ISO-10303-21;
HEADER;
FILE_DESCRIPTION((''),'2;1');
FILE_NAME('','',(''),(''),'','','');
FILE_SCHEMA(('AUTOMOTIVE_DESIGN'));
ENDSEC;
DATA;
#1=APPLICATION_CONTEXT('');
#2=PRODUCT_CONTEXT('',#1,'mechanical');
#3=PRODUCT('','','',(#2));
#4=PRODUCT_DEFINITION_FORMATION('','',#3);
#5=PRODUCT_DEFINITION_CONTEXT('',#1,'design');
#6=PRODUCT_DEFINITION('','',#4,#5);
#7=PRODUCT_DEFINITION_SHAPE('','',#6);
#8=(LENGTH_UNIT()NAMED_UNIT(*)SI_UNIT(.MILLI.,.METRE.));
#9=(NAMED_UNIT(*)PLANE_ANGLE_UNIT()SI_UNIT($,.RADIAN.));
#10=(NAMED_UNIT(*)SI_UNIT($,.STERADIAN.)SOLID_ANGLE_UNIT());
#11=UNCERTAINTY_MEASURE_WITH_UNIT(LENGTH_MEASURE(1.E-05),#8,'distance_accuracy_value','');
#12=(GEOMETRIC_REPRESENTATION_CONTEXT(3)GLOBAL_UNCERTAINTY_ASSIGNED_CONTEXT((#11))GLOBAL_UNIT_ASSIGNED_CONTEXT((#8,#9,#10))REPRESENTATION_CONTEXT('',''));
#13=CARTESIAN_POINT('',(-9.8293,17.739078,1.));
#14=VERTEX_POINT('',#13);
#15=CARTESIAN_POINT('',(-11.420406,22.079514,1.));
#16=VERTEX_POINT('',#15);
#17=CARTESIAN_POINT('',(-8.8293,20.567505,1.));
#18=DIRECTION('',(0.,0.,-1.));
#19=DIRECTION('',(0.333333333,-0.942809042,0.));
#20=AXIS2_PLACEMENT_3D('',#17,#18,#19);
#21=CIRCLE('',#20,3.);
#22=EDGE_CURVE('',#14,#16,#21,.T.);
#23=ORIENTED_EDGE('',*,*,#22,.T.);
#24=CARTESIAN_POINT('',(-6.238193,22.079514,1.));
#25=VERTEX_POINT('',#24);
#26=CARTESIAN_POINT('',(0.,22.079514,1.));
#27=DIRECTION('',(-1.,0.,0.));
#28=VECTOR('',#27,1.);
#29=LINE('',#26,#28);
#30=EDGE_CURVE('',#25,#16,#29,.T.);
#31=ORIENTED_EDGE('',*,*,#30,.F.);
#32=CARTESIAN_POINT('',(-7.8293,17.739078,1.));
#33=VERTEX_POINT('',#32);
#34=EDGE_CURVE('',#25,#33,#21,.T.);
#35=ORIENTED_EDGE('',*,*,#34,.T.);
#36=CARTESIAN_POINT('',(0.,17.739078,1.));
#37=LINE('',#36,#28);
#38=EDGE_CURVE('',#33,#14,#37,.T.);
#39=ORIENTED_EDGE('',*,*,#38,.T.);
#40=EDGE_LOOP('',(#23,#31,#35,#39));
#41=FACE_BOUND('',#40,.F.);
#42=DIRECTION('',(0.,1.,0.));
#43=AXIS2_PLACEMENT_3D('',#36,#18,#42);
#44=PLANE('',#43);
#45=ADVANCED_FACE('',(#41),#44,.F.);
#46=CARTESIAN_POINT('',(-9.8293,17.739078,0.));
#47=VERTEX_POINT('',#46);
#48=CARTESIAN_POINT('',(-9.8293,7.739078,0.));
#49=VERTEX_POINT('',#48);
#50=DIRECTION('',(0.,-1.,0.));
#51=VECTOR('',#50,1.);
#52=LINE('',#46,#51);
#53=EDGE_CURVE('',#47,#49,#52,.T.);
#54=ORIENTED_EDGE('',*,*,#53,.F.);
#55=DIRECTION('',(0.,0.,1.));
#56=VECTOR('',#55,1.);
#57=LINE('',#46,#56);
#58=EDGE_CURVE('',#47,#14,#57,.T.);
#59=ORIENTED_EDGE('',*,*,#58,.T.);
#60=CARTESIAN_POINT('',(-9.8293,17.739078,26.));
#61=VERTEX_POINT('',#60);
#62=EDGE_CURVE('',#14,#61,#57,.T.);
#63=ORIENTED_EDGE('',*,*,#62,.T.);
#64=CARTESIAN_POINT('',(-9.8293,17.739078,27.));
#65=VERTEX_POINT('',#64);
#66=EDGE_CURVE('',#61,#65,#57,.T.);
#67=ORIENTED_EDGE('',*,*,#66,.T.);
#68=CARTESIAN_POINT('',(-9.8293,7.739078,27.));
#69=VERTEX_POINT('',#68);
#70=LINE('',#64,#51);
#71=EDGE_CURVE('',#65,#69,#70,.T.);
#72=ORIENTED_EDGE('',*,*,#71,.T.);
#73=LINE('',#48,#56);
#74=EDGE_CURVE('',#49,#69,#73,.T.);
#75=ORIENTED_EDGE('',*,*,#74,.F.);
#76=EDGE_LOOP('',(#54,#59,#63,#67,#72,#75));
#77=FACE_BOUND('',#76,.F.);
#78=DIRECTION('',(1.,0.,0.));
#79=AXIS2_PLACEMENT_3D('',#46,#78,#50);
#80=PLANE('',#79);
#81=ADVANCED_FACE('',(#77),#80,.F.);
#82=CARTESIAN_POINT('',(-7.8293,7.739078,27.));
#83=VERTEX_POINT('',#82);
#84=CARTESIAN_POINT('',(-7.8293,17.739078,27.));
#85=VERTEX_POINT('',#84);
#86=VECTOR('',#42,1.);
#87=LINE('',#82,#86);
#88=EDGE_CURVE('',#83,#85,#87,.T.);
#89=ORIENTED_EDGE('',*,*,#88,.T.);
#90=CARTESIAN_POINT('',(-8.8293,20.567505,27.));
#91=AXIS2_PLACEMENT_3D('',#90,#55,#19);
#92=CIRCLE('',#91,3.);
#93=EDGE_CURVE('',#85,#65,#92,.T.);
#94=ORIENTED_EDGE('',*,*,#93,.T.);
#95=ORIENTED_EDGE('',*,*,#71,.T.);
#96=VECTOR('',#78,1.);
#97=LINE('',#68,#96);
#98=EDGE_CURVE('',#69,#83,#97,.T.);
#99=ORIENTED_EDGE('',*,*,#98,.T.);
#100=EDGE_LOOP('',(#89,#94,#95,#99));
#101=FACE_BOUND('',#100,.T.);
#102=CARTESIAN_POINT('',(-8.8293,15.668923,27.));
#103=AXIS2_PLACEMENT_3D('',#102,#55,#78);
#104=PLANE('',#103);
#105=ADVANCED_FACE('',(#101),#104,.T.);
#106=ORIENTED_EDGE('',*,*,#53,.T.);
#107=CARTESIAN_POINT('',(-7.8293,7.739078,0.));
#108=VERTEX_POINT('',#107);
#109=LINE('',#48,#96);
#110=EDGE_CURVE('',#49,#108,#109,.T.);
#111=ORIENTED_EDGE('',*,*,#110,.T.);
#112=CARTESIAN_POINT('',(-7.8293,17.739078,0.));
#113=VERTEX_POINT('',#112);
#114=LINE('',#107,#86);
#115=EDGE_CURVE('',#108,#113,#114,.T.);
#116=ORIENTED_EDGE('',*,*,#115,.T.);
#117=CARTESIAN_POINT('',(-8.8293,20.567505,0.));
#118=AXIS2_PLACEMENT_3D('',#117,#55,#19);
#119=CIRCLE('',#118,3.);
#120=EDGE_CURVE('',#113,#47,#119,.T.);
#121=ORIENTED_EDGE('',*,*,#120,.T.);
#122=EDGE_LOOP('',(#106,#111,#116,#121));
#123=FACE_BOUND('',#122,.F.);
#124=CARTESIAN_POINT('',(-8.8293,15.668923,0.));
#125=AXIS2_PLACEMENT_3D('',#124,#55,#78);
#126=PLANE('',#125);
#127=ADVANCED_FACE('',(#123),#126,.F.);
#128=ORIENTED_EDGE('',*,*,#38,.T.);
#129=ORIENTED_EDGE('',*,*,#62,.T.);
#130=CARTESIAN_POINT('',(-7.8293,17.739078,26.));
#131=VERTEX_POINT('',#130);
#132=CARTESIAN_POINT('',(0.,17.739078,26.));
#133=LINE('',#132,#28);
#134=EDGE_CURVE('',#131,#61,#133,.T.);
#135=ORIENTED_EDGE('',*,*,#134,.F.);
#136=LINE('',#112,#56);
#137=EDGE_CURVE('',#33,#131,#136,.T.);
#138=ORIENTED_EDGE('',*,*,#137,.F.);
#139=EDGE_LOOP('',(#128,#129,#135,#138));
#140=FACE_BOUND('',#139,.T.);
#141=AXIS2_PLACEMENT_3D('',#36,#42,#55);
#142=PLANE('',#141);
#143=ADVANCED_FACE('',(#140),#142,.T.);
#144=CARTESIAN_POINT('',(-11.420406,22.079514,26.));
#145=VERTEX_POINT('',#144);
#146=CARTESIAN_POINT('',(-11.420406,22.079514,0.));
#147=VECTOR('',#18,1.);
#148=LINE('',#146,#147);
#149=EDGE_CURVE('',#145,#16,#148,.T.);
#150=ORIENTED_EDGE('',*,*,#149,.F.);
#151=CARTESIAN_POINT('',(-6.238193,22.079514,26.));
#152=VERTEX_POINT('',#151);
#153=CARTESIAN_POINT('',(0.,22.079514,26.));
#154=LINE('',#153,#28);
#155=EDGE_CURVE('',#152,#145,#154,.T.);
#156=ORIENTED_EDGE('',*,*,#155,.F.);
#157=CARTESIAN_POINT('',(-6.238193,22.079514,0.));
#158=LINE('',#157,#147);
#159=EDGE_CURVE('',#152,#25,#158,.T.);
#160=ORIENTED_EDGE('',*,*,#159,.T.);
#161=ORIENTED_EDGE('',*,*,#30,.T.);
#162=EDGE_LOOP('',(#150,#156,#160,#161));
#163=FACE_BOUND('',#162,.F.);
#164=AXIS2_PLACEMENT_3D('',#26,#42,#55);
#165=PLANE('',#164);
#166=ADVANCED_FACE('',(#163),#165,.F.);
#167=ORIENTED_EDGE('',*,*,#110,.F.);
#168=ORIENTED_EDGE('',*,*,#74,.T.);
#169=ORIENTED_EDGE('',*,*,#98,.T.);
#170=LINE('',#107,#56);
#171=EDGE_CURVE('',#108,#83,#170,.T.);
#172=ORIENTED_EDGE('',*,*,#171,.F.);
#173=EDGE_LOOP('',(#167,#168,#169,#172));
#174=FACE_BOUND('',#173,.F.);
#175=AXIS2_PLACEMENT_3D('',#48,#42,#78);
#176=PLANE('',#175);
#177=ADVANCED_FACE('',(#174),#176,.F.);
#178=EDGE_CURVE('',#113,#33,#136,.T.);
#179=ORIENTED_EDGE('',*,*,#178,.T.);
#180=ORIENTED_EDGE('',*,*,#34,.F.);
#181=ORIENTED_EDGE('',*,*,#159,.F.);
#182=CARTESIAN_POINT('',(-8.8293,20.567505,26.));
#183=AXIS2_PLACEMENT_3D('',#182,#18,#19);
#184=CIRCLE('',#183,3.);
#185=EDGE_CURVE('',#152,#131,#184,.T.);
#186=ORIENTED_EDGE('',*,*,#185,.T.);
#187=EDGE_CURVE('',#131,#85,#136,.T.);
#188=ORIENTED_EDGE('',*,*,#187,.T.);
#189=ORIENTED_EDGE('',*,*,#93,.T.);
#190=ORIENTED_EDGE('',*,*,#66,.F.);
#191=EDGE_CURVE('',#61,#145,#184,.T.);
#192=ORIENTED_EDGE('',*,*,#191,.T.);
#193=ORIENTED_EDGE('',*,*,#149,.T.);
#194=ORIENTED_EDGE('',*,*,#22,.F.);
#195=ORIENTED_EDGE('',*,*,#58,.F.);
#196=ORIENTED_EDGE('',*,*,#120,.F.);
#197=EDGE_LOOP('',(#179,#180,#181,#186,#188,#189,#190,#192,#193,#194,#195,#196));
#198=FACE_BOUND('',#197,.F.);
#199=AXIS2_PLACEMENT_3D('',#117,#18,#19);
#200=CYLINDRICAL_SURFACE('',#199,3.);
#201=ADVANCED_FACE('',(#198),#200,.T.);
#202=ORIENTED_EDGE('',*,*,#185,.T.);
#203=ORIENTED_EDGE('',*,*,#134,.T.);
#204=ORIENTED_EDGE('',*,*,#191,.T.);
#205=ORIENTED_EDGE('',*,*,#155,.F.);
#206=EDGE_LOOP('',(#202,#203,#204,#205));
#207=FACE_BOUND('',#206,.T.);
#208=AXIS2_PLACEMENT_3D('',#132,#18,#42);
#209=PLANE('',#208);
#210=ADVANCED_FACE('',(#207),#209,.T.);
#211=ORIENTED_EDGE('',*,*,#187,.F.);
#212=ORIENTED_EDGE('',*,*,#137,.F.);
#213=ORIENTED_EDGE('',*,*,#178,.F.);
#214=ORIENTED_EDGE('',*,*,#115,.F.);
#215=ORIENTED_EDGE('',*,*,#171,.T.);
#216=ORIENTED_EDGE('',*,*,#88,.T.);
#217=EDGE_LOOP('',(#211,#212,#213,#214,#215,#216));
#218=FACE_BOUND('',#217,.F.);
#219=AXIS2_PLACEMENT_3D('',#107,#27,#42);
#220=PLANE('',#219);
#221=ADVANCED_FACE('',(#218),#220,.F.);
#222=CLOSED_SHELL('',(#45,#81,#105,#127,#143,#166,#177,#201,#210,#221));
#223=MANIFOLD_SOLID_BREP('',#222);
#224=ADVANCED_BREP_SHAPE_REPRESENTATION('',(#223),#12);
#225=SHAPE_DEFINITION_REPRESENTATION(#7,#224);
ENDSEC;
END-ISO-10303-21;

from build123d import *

# Parameters (mm, degrees)
F1_DEPTH = 27
F2_W     = 4.3404353922
F2_H     = 25
F3_DEPTH = 25


# Not quite as in the source:
# - a feature names something its author has since deleted; it is built from what else it names


with BuildPart() as f1:
    # F0 (on Top) → F1 (new body)
    with BuildSketch(Plane.XY):
        with BuildLine():
            Line((-9.8292995244, 17.7390783057), (-9.8292995244, 7.7390783057))
            Line((-9.8292995244, 7.7390783057), (-7.8292995244, 7.7390783057))
            Line((-7.8292995244, 7.7390783057), (-7.8292995244, 17.7390783057))
            ThreePointArc((-7.8292995244, 17.7390783057), (-8.8292995244, 23.5675054304), (-9.8292995244, 17.7390783057))
        make_face()
    extrude(amount=F1_DEPTH)

    # F2 (on Right) → F3 (cut)
    with BuildSketch(Plane.YZ):
        with Locations((19.9092960018, 13.5)):
            Rectangle(F2_W, F2_H)
    extrude(amount=-F3_DEPTH, mode=Mode.SUBTRACT)


solid = f1.part
